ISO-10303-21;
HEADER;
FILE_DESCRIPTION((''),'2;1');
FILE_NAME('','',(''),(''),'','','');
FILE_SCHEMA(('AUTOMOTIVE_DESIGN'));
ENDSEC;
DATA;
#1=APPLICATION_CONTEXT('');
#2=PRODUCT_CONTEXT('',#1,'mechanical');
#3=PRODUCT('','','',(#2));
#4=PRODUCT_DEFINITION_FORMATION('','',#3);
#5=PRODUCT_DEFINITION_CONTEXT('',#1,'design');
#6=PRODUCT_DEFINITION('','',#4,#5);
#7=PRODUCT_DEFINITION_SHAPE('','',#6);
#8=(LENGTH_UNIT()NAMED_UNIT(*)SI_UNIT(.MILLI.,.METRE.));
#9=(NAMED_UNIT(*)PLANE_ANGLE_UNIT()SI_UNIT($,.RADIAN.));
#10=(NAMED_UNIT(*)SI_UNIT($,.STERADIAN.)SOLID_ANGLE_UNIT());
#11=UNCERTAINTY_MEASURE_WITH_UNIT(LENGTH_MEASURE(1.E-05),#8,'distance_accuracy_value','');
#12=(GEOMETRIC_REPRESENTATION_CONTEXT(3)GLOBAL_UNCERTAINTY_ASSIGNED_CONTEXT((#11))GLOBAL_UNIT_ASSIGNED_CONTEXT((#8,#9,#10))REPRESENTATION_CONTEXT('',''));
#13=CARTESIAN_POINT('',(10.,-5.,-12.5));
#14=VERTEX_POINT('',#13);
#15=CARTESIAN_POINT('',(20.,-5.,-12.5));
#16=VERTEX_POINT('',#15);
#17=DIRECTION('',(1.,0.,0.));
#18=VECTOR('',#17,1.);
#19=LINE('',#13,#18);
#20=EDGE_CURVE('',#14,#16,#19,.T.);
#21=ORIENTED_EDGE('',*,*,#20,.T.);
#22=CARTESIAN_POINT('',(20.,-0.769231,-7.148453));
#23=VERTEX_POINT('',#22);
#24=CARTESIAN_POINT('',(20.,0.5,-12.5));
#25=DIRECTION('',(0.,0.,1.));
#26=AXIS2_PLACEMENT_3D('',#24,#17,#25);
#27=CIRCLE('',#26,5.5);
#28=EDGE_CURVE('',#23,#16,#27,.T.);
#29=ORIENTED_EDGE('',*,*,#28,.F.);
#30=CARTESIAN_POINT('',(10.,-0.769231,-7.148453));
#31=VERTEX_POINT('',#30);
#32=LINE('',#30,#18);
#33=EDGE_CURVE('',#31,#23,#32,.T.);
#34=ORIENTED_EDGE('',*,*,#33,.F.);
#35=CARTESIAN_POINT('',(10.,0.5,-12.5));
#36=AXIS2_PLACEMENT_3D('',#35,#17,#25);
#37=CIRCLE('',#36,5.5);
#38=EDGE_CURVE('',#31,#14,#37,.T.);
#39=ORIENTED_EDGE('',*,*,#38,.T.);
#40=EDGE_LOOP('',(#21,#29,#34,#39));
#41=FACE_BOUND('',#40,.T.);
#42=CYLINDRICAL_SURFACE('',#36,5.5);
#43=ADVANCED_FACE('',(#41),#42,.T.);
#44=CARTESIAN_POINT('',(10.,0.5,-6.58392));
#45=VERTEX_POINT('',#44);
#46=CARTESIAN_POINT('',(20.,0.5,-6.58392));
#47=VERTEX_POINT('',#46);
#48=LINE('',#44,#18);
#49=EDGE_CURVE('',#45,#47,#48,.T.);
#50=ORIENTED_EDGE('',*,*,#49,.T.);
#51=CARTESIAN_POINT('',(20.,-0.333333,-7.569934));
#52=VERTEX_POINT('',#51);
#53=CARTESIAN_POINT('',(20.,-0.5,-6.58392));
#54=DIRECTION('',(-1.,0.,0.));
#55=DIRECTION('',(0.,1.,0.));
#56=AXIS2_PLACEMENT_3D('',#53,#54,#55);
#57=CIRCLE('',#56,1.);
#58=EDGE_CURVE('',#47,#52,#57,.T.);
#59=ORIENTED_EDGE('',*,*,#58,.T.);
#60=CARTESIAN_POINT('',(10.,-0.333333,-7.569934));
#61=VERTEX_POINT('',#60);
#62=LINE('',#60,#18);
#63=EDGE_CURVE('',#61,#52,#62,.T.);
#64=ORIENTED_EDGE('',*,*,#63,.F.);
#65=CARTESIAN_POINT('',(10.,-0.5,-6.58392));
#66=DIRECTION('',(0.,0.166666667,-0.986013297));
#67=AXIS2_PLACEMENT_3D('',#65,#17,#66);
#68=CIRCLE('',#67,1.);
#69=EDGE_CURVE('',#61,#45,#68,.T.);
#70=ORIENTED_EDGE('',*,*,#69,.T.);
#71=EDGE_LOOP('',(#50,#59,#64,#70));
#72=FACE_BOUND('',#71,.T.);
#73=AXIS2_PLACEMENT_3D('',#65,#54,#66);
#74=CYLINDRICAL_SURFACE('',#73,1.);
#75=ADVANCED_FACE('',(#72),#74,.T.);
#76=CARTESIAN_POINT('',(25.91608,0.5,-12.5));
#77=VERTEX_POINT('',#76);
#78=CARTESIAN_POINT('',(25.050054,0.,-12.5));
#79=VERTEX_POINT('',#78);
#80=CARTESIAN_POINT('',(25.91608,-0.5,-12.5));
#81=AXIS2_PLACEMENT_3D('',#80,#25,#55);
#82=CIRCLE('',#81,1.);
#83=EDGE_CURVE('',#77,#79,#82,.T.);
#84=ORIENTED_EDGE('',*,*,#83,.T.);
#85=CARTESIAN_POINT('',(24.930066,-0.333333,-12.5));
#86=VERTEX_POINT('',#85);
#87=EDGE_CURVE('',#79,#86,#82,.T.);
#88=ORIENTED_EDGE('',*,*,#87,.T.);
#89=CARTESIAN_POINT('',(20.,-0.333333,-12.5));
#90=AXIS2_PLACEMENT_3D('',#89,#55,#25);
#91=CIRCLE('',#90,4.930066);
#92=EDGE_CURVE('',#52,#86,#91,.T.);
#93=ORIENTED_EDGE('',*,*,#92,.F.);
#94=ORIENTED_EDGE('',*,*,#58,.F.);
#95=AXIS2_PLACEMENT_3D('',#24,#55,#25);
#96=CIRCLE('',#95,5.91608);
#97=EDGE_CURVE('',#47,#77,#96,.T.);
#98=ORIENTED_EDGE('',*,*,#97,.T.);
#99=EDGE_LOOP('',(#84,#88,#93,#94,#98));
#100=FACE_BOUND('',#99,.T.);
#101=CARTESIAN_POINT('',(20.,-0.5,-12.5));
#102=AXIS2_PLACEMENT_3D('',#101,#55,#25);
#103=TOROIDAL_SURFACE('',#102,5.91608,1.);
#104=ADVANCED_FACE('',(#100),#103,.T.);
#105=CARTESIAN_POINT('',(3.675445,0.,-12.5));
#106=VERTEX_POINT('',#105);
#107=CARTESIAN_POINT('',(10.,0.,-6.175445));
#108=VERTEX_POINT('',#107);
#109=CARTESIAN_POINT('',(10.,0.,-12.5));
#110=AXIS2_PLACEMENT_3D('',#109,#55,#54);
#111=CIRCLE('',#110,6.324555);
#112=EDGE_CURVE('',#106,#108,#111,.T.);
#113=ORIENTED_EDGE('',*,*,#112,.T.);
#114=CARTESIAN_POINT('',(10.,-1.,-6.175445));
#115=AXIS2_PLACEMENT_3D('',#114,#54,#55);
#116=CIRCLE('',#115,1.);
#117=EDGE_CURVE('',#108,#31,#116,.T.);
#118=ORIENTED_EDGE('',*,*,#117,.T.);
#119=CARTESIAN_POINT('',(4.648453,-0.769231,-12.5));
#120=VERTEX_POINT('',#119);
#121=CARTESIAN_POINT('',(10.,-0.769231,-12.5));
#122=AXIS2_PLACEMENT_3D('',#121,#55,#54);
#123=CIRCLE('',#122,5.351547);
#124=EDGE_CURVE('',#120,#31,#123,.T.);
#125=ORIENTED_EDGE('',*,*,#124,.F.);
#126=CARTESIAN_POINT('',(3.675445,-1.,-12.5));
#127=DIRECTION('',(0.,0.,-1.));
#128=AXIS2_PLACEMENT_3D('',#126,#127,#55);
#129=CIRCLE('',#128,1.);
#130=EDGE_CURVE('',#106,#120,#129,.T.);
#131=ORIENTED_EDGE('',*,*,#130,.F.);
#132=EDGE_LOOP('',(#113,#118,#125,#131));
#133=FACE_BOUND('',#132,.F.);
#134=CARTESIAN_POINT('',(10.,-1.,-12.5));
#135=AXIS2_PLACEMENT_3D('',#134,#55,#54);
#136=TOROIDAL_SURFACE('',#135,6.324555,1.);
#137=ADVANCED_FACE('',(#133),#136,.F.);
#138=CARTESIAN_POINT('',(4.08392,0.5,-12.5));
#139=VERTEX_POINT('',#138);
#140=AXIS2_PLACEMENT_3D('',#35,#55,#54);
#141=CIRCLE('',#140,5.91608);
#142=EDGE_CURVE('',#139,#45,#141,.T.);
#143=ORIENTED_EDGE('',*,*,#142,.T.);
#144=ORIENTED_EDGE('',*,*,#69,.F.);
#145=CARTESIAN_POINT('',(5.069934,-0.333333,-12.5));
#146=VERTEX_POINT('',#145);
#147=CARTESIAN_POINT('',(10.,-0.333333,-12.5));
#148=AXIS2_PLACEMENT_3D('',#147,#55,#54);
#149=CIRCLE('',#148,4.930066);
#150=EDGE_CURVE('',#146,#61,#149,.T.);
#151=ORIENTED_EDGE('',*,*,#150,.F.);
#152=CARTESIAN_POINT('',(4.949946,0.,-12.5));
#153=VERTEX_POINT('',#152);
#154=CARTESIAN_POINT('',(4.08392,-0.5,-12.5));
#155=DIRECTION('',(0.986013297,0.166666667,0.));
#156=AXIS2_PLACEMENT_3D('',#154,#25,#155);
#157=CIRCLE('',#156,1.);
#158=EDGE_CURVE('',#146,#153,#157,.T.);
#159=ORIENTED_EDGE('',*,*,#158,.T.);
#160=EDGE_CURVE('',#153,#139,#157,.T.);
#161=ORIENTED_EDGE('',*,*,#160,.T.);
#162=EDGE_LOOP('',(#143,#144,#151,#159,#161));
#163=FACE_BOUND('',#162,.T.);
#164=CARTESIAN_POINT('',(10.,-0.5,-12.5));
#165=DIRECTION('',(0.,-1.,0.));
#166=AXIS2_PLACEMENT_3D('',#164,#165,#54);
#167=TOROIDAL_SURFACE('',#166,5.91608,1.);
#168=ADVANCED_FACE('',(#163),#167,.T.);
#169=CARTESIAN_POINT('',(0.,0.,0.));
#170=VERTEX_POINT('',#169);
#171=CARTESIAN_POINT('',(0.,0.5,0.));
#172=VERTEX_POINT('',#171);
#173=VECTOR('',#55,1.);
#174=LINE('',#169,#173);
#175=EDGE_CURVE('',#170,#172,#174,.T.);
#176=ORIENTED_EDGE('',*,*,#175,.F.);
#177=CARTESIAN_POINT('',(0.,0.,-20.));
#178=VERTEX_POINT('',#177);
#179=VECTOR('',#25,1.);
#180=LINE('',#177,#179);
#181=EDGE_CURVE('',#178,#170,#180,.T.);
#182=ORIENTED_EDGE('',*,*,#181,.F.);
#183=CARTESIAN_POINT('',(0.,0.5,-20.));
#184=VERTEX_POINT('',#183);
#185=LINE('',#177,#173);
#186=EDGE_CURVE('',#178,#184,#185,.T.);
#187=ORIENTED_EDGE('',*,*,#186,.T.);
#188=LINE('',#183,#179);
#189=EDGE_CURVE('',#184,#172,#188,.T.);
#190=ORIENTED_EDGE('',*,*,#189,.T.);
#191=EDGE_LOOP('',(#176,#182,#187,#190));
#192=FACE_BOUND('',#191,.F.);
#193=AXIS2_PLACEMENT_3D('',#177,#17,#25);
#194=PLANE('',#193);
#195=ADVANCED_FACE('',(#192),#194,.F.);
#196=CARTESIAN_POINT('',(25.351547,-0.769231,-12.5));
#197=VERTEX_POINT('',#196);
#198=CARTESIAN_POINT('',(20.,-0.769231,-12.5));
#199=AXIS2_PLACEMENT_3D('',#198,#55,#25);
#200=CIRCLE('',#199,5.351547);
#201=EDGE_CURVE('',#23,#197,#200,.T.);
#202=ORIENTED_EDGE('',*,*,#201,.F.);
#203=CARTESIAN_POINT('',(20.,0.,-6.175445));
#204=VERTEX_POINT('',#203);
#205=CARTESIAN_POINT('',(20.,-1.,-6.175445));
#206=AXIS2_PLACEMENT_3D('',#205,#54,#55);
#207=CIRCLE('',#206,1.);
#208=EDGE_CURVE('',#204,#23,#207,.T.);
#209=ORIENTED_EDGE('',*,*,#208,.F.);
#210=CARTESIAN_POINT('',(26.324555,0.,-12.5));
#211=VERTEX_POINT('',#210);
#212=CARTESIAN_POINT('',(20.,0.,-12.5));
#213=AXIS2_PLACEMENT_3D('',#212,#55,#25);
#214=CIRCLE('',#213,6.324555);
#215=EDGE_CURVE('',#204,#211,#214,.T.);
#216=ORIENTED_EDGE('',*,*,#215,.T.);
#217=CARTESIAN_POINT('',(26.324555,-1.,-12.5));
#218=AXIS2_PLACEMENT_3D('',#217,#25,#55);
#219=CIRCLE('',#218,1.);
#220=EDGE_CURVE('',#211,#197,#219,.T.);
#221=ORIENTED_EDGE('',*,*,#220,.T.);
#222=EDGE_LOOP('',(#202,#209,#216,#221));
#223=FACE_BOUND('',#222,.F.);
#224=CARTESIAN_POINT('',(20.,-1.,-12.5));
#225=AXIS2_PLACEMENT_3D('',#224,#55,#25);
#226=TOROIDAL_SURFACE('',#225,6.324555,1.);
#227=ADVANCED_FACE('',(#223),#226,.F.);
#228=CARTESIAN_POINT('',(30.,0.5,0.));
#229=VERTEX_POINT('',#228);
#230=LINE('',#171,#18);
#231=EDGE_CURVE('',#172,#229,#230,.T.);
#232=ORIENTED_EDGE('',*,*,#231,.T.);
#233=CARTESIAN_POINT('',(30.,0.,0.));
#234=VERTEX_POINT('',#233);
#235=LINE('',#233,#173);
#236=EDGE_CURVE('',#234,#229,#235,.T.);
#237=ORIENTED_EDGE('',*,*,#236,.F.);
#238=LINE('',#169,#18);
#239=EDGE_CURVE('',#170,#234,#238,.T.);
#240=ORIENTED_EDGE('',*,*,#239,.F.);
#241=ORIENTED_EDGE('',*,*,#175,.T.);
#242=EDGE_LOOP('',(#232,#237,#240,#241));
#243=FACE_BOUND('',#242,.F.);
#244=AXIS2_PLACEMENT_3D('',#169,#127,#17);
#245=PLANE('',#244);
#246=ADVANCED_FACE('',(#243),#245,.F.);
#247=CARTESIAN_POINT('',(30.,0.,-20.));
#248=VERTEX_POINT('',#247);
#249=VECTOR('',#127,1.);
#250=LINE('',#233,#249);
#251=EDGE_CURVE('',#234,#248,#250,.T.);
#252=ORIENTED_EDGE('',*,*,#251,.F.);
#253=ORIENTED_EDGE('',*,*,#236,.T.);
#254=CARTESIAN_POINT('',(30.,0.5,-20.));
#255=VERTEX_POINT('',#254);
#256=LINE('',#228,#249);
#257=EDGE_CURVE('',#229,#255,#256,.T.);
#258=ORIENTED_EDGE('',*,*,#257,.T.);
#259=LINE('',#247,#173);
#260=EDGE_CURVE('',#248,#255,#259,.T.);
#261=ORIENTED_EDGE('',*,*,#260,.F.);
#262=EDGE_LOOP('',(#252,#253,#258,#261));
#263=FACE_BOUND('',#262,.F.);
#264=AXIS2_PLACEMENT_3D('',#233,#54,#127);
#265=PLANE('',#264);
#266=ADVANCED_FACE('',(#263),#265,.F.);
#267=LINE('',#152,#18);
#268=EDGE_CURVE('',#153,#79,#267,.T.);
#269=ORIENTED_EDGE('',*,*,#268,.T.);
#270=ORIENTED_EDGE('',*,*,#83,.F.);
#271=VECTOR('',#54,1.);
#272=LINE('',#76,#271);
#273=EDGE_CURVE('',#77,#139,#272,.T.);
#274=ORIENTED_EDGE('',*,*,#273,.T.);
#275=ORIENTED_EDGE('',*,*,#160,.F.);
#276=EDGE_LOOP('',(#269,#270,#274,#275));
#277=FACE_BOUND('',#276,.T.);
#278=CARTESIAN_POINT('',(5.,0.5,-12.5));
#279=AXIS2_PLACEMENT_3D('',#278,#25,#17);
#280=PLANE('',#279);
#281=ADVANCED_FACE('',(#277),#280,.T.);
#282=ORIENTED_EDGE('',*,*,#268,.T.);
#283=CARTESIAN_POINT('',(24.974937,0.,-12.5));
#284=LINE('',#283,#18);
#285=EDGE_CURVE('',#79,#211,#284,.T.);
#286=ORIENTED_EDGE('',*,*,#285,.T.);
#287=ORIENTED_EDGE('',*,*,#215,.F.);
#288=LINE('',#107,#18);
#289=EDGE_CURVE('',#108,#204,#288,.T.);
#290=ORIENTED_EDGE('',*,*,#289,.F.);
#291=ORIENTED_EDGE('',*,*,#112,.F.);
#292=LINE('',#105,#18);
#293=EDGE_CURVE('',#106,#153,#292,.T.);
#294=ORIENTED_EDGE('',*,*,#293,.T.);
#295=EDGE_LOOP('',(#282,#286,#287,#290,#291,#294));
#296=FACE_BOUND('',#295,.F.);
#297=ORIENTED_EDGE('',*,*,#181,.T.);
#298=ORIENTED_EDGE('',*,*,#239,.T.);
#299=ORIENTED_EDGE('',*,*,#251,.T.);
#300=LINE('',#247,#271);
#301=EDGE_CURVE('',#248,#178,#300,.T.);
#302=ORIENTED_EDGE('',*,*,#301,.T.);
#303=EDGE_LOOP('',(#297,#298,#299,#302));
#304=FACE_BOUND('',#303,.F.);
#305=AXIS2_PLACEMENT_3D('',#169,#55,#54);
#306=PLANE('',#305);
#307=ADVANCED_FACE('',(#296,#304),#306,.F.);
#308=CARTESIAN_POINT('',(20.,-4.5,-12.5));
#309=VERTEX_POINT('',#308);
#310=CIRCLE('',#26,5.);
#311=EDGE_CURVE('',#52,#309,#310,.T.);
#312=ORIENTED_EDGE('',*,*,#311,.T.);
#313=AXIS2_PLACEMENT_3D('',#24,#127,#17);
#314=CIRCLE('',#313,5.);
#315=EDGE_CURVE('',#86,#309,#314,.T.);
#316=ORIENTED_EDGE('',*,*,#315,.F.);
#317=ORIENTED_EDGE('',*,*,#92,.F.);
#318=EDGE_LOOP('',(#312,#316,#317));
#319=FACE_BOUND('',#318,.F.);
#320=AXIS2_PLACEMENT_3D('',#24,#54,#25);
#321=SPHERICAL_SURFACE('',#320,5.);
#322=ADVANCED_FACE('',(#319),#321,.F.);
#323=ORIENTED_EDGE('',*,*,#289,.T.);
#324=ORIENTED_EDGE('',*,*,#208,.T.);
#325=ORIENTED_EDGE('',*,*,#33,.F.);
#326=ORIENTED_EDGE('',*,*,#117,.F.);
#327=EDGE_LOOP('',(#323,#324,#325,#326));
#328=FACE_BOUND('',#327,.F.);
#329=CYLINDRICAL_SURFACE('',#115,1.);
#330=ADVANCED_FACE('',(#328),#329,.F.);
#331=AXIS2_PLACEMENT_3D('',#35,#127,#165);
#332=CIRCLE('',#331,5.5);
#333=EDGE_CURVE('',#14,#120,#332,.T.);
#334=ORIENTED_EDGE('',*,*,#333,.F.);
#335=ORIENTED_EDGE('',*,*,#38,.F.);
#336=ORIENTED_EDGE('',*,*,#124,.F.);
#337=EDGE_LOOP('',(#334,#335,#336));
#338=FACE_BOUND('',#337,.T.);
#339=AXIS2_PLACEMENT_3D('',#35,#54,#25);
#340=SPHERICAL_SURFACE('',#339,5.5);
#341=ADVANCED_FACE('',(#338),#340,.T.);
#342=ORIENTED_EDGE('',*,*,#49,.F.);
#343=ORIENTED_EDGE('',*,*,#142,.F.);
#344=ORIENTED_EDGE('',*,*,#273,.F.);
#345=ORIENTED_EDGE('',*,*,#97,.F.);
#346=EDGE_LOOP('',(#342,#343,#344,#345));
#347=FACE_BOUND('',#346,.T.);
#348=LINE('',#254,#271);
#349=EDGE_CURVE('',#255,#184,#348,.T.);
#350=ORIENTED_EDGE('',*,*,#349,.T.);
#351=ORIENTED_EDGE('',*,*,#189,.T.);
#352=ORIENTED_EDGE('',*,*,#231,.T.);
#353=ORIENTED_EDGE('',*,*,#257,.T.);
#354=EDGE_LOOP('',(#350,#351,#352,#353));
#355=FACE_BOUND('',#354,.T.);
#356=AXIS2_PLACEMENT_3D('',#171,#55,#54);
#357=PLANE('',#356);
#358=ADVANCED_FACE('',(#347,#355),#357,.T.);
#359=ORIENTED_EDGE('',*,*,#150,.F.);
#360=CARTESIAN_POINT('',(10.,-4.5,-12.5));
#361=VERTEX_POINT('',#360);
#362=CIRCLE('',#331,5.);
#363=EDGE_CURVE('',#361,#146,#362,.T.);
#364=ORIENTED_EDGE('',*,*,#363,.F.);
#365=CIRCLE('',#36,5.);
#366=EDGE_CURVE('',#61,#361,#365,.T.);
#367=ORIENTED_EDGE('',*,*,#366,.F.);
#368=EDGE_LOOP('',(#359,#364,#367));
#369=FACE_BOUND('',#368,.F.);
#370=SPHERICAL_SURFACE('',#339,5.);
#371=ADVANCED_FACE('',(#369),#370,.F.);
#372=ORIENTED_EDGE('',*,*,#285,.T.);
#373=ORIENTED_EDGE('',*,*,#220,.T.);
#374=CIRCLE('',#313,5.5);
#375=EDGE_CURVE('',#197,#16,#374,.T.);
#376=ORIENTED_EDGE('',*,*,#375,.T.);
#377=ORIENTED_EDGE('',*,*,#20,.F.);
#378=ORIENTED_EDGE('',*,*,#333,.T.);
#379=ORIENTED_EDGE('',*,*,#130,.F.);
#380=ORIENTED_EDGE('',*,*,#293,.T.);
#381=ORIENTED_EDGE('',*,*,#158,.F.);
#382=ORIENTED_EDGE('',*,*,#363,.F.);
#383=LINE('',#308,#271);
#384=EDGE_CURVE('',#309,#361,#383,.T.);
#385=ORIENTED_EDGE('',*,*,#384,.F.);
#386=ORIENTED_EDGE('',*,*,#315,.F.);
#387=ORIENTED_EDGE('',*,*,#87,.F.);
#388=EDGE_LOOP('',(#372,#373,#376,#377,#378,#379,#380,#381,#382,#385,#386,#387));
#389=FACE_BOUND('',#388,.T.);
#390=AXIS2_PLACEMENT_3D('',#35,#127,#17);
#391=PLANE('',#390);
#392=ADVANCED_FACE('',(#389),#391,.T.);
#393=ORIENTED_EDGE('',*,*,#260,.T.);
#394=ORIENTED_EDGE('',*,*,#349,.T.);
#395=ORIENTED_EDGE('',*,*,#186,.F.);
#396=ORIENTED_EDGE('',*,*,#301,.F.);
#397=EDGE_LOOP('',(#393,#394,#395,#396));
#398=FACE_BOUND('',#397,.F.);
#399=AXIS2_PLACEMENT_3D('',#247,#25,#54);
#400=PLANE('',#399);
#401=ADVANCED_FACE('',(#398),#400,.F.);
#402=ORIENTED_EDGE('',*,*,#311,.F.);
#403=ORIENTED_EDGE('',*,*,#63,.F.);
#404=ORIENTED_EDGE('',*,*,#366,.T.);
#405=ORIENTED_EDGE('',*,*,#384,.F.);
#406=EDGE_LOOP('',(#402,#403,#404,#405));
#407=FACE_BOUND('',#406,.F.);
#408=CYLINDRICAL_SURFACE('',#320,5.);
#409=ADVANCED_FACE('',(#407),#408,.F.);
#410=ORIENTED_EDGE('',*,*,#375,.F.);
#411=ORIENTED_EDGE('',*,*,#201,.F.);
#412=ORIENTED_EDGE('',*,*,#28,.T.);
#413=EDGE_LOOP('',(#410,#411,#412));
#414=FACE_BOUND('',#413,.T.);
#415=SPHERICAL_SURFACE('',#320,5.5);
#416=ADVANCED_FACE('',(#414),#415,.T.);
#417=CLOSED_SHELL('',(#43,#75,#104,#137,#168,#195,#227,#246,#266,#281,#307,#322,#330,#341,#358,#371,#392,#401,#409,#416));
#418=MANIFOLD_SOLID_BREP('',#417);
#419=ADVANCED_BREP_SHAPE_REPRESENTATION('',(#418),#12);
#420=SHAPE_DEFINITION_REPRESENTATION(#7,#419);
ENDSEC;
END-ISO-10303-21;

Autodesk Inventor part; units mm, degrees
ref_plane "YZ Plane" through (0, 0, 0) normal (1, 0, 0) x (0, 1, 0)
ref_plane "XZ Plane" through (0, 0, 0) normal (0, 1, 0) x (-1, 0, 0)
sketch "Sketch1" plane through (0, 0, 0) normal (0, 1, 0) x (-1, 0, 0)
  line L0 (0, 0) -> (-30, 0)
  line L1 (-30, 0) -> (-30, -20)
  line L2 (-30, -20) -> (0, -20)
  line L3 (0, -20) -> (0, 0)
  dimension "d0" = 30
  dimension "d1" = 20
extrude "Plate1" add sketch "Sketch1" along normal blind 0.5
sketch "Sketch2" plane through (0, 0.5, 0) normal (0, 1, 0) x (1, 0, 0)
  arc A0 (5, 12.5) -> (10, 7.5) centre (10, 12.5) ccw
  line L0 (10, 7.5) -> (20, 7.5)
  arc A1 (20, 7.5) -> (25, 12.5) centre (20, 12.5) ccw
  line L1 (5, 12.5) -> (25, 12.5)
  line L2 (15, 12.5) -> (15, 7.5) construction
  line L3 (30, 0) -> (0, 0) construction
  line L4 (0, 0) -> (0, 20) construction
  point P0 (15, 10)
  dimension "d3" = 20
  dimension "d4" = 5
  dimension "d5" = 10
  dimension "d6" = 15
extrude "Extrusion1" cut sketch "Sketch2" against normal blind 0.5
ref_plane "Work Plane1" through (10, 0.5, -12.5) normal (0, -1, 0) x (1, 0, 0)
sketch "Sketch3" plane through (10, 0.5, -12.5) normal (0, -1, 0) x (1, 0, 0)
  arc A0 (0, 5) -> (-5, 0) centre (0, 0) ccw projected
  line L0 (-5, 0) -> (15, 0) projected
  line L1 (10, 5) -> (0, 5) projected
  arc A1 (15, 0) -> (10, 5) centre (10, 0) ccw projected
  line L2 (5, 0) -> (5, 5) construction
  line L3 (15, 0) -> (-5, 0) projected
  line L4 (-5, 0) -> (-5.5, 0)
  arc A2 (0, 5.5) -> (-5.5, 0) centre (0, 0) ccw
  line L5 (0, 5.5) -> (10, 5.5)
  arc A3 (15.5, 0) -> (10, 5.5) centre (10, 0) ccw
  line L6 (15.5, 0) -> (15, 0)
  point P0 (-10, 12.5)
  dimension "d9" = 0.5
revolve "Revolution1" add sketch "Sketch3" angle 90 about axis through (5, 0.5, -12.5) along (1, 0, 0) contours A0 L4 A2 L5 A3 L6 A1 L1
fillet "Fillet1" radius 1 6 edges at (6.4645, 0.5, -8.9645) (23.5355, 0.5, -8.9645) (15, 0.5, -7.5) (23.873, 0, -8.627) (6.127, 0, -8.627) (15, 0, -7.0228)
equation "\"d7\" = Thickness"
equation "\"d9\" = Thickness"
equation "\"d2\" = Thickness"
equation "\"BendRadius\" = Thickness"
equation "\"BendReliefWidth\" = Thickness"
equation "\"BendReliefDepth\" = 0.5 * Thickness"
equation "\"CornerReliefSize\" = 4 * Thickness"
equation "\"MinimumRemnant\" = 2 * Thickness"
equation "\"TransitionRadius\" = BendRadius"
equation "\"JacobiRadiusSize\" = BendRadius"
equation "\"GapSize\" = Thickness"
equation "\"Thickness\" = 0.5"
properties part number "CE-4.1.2"
